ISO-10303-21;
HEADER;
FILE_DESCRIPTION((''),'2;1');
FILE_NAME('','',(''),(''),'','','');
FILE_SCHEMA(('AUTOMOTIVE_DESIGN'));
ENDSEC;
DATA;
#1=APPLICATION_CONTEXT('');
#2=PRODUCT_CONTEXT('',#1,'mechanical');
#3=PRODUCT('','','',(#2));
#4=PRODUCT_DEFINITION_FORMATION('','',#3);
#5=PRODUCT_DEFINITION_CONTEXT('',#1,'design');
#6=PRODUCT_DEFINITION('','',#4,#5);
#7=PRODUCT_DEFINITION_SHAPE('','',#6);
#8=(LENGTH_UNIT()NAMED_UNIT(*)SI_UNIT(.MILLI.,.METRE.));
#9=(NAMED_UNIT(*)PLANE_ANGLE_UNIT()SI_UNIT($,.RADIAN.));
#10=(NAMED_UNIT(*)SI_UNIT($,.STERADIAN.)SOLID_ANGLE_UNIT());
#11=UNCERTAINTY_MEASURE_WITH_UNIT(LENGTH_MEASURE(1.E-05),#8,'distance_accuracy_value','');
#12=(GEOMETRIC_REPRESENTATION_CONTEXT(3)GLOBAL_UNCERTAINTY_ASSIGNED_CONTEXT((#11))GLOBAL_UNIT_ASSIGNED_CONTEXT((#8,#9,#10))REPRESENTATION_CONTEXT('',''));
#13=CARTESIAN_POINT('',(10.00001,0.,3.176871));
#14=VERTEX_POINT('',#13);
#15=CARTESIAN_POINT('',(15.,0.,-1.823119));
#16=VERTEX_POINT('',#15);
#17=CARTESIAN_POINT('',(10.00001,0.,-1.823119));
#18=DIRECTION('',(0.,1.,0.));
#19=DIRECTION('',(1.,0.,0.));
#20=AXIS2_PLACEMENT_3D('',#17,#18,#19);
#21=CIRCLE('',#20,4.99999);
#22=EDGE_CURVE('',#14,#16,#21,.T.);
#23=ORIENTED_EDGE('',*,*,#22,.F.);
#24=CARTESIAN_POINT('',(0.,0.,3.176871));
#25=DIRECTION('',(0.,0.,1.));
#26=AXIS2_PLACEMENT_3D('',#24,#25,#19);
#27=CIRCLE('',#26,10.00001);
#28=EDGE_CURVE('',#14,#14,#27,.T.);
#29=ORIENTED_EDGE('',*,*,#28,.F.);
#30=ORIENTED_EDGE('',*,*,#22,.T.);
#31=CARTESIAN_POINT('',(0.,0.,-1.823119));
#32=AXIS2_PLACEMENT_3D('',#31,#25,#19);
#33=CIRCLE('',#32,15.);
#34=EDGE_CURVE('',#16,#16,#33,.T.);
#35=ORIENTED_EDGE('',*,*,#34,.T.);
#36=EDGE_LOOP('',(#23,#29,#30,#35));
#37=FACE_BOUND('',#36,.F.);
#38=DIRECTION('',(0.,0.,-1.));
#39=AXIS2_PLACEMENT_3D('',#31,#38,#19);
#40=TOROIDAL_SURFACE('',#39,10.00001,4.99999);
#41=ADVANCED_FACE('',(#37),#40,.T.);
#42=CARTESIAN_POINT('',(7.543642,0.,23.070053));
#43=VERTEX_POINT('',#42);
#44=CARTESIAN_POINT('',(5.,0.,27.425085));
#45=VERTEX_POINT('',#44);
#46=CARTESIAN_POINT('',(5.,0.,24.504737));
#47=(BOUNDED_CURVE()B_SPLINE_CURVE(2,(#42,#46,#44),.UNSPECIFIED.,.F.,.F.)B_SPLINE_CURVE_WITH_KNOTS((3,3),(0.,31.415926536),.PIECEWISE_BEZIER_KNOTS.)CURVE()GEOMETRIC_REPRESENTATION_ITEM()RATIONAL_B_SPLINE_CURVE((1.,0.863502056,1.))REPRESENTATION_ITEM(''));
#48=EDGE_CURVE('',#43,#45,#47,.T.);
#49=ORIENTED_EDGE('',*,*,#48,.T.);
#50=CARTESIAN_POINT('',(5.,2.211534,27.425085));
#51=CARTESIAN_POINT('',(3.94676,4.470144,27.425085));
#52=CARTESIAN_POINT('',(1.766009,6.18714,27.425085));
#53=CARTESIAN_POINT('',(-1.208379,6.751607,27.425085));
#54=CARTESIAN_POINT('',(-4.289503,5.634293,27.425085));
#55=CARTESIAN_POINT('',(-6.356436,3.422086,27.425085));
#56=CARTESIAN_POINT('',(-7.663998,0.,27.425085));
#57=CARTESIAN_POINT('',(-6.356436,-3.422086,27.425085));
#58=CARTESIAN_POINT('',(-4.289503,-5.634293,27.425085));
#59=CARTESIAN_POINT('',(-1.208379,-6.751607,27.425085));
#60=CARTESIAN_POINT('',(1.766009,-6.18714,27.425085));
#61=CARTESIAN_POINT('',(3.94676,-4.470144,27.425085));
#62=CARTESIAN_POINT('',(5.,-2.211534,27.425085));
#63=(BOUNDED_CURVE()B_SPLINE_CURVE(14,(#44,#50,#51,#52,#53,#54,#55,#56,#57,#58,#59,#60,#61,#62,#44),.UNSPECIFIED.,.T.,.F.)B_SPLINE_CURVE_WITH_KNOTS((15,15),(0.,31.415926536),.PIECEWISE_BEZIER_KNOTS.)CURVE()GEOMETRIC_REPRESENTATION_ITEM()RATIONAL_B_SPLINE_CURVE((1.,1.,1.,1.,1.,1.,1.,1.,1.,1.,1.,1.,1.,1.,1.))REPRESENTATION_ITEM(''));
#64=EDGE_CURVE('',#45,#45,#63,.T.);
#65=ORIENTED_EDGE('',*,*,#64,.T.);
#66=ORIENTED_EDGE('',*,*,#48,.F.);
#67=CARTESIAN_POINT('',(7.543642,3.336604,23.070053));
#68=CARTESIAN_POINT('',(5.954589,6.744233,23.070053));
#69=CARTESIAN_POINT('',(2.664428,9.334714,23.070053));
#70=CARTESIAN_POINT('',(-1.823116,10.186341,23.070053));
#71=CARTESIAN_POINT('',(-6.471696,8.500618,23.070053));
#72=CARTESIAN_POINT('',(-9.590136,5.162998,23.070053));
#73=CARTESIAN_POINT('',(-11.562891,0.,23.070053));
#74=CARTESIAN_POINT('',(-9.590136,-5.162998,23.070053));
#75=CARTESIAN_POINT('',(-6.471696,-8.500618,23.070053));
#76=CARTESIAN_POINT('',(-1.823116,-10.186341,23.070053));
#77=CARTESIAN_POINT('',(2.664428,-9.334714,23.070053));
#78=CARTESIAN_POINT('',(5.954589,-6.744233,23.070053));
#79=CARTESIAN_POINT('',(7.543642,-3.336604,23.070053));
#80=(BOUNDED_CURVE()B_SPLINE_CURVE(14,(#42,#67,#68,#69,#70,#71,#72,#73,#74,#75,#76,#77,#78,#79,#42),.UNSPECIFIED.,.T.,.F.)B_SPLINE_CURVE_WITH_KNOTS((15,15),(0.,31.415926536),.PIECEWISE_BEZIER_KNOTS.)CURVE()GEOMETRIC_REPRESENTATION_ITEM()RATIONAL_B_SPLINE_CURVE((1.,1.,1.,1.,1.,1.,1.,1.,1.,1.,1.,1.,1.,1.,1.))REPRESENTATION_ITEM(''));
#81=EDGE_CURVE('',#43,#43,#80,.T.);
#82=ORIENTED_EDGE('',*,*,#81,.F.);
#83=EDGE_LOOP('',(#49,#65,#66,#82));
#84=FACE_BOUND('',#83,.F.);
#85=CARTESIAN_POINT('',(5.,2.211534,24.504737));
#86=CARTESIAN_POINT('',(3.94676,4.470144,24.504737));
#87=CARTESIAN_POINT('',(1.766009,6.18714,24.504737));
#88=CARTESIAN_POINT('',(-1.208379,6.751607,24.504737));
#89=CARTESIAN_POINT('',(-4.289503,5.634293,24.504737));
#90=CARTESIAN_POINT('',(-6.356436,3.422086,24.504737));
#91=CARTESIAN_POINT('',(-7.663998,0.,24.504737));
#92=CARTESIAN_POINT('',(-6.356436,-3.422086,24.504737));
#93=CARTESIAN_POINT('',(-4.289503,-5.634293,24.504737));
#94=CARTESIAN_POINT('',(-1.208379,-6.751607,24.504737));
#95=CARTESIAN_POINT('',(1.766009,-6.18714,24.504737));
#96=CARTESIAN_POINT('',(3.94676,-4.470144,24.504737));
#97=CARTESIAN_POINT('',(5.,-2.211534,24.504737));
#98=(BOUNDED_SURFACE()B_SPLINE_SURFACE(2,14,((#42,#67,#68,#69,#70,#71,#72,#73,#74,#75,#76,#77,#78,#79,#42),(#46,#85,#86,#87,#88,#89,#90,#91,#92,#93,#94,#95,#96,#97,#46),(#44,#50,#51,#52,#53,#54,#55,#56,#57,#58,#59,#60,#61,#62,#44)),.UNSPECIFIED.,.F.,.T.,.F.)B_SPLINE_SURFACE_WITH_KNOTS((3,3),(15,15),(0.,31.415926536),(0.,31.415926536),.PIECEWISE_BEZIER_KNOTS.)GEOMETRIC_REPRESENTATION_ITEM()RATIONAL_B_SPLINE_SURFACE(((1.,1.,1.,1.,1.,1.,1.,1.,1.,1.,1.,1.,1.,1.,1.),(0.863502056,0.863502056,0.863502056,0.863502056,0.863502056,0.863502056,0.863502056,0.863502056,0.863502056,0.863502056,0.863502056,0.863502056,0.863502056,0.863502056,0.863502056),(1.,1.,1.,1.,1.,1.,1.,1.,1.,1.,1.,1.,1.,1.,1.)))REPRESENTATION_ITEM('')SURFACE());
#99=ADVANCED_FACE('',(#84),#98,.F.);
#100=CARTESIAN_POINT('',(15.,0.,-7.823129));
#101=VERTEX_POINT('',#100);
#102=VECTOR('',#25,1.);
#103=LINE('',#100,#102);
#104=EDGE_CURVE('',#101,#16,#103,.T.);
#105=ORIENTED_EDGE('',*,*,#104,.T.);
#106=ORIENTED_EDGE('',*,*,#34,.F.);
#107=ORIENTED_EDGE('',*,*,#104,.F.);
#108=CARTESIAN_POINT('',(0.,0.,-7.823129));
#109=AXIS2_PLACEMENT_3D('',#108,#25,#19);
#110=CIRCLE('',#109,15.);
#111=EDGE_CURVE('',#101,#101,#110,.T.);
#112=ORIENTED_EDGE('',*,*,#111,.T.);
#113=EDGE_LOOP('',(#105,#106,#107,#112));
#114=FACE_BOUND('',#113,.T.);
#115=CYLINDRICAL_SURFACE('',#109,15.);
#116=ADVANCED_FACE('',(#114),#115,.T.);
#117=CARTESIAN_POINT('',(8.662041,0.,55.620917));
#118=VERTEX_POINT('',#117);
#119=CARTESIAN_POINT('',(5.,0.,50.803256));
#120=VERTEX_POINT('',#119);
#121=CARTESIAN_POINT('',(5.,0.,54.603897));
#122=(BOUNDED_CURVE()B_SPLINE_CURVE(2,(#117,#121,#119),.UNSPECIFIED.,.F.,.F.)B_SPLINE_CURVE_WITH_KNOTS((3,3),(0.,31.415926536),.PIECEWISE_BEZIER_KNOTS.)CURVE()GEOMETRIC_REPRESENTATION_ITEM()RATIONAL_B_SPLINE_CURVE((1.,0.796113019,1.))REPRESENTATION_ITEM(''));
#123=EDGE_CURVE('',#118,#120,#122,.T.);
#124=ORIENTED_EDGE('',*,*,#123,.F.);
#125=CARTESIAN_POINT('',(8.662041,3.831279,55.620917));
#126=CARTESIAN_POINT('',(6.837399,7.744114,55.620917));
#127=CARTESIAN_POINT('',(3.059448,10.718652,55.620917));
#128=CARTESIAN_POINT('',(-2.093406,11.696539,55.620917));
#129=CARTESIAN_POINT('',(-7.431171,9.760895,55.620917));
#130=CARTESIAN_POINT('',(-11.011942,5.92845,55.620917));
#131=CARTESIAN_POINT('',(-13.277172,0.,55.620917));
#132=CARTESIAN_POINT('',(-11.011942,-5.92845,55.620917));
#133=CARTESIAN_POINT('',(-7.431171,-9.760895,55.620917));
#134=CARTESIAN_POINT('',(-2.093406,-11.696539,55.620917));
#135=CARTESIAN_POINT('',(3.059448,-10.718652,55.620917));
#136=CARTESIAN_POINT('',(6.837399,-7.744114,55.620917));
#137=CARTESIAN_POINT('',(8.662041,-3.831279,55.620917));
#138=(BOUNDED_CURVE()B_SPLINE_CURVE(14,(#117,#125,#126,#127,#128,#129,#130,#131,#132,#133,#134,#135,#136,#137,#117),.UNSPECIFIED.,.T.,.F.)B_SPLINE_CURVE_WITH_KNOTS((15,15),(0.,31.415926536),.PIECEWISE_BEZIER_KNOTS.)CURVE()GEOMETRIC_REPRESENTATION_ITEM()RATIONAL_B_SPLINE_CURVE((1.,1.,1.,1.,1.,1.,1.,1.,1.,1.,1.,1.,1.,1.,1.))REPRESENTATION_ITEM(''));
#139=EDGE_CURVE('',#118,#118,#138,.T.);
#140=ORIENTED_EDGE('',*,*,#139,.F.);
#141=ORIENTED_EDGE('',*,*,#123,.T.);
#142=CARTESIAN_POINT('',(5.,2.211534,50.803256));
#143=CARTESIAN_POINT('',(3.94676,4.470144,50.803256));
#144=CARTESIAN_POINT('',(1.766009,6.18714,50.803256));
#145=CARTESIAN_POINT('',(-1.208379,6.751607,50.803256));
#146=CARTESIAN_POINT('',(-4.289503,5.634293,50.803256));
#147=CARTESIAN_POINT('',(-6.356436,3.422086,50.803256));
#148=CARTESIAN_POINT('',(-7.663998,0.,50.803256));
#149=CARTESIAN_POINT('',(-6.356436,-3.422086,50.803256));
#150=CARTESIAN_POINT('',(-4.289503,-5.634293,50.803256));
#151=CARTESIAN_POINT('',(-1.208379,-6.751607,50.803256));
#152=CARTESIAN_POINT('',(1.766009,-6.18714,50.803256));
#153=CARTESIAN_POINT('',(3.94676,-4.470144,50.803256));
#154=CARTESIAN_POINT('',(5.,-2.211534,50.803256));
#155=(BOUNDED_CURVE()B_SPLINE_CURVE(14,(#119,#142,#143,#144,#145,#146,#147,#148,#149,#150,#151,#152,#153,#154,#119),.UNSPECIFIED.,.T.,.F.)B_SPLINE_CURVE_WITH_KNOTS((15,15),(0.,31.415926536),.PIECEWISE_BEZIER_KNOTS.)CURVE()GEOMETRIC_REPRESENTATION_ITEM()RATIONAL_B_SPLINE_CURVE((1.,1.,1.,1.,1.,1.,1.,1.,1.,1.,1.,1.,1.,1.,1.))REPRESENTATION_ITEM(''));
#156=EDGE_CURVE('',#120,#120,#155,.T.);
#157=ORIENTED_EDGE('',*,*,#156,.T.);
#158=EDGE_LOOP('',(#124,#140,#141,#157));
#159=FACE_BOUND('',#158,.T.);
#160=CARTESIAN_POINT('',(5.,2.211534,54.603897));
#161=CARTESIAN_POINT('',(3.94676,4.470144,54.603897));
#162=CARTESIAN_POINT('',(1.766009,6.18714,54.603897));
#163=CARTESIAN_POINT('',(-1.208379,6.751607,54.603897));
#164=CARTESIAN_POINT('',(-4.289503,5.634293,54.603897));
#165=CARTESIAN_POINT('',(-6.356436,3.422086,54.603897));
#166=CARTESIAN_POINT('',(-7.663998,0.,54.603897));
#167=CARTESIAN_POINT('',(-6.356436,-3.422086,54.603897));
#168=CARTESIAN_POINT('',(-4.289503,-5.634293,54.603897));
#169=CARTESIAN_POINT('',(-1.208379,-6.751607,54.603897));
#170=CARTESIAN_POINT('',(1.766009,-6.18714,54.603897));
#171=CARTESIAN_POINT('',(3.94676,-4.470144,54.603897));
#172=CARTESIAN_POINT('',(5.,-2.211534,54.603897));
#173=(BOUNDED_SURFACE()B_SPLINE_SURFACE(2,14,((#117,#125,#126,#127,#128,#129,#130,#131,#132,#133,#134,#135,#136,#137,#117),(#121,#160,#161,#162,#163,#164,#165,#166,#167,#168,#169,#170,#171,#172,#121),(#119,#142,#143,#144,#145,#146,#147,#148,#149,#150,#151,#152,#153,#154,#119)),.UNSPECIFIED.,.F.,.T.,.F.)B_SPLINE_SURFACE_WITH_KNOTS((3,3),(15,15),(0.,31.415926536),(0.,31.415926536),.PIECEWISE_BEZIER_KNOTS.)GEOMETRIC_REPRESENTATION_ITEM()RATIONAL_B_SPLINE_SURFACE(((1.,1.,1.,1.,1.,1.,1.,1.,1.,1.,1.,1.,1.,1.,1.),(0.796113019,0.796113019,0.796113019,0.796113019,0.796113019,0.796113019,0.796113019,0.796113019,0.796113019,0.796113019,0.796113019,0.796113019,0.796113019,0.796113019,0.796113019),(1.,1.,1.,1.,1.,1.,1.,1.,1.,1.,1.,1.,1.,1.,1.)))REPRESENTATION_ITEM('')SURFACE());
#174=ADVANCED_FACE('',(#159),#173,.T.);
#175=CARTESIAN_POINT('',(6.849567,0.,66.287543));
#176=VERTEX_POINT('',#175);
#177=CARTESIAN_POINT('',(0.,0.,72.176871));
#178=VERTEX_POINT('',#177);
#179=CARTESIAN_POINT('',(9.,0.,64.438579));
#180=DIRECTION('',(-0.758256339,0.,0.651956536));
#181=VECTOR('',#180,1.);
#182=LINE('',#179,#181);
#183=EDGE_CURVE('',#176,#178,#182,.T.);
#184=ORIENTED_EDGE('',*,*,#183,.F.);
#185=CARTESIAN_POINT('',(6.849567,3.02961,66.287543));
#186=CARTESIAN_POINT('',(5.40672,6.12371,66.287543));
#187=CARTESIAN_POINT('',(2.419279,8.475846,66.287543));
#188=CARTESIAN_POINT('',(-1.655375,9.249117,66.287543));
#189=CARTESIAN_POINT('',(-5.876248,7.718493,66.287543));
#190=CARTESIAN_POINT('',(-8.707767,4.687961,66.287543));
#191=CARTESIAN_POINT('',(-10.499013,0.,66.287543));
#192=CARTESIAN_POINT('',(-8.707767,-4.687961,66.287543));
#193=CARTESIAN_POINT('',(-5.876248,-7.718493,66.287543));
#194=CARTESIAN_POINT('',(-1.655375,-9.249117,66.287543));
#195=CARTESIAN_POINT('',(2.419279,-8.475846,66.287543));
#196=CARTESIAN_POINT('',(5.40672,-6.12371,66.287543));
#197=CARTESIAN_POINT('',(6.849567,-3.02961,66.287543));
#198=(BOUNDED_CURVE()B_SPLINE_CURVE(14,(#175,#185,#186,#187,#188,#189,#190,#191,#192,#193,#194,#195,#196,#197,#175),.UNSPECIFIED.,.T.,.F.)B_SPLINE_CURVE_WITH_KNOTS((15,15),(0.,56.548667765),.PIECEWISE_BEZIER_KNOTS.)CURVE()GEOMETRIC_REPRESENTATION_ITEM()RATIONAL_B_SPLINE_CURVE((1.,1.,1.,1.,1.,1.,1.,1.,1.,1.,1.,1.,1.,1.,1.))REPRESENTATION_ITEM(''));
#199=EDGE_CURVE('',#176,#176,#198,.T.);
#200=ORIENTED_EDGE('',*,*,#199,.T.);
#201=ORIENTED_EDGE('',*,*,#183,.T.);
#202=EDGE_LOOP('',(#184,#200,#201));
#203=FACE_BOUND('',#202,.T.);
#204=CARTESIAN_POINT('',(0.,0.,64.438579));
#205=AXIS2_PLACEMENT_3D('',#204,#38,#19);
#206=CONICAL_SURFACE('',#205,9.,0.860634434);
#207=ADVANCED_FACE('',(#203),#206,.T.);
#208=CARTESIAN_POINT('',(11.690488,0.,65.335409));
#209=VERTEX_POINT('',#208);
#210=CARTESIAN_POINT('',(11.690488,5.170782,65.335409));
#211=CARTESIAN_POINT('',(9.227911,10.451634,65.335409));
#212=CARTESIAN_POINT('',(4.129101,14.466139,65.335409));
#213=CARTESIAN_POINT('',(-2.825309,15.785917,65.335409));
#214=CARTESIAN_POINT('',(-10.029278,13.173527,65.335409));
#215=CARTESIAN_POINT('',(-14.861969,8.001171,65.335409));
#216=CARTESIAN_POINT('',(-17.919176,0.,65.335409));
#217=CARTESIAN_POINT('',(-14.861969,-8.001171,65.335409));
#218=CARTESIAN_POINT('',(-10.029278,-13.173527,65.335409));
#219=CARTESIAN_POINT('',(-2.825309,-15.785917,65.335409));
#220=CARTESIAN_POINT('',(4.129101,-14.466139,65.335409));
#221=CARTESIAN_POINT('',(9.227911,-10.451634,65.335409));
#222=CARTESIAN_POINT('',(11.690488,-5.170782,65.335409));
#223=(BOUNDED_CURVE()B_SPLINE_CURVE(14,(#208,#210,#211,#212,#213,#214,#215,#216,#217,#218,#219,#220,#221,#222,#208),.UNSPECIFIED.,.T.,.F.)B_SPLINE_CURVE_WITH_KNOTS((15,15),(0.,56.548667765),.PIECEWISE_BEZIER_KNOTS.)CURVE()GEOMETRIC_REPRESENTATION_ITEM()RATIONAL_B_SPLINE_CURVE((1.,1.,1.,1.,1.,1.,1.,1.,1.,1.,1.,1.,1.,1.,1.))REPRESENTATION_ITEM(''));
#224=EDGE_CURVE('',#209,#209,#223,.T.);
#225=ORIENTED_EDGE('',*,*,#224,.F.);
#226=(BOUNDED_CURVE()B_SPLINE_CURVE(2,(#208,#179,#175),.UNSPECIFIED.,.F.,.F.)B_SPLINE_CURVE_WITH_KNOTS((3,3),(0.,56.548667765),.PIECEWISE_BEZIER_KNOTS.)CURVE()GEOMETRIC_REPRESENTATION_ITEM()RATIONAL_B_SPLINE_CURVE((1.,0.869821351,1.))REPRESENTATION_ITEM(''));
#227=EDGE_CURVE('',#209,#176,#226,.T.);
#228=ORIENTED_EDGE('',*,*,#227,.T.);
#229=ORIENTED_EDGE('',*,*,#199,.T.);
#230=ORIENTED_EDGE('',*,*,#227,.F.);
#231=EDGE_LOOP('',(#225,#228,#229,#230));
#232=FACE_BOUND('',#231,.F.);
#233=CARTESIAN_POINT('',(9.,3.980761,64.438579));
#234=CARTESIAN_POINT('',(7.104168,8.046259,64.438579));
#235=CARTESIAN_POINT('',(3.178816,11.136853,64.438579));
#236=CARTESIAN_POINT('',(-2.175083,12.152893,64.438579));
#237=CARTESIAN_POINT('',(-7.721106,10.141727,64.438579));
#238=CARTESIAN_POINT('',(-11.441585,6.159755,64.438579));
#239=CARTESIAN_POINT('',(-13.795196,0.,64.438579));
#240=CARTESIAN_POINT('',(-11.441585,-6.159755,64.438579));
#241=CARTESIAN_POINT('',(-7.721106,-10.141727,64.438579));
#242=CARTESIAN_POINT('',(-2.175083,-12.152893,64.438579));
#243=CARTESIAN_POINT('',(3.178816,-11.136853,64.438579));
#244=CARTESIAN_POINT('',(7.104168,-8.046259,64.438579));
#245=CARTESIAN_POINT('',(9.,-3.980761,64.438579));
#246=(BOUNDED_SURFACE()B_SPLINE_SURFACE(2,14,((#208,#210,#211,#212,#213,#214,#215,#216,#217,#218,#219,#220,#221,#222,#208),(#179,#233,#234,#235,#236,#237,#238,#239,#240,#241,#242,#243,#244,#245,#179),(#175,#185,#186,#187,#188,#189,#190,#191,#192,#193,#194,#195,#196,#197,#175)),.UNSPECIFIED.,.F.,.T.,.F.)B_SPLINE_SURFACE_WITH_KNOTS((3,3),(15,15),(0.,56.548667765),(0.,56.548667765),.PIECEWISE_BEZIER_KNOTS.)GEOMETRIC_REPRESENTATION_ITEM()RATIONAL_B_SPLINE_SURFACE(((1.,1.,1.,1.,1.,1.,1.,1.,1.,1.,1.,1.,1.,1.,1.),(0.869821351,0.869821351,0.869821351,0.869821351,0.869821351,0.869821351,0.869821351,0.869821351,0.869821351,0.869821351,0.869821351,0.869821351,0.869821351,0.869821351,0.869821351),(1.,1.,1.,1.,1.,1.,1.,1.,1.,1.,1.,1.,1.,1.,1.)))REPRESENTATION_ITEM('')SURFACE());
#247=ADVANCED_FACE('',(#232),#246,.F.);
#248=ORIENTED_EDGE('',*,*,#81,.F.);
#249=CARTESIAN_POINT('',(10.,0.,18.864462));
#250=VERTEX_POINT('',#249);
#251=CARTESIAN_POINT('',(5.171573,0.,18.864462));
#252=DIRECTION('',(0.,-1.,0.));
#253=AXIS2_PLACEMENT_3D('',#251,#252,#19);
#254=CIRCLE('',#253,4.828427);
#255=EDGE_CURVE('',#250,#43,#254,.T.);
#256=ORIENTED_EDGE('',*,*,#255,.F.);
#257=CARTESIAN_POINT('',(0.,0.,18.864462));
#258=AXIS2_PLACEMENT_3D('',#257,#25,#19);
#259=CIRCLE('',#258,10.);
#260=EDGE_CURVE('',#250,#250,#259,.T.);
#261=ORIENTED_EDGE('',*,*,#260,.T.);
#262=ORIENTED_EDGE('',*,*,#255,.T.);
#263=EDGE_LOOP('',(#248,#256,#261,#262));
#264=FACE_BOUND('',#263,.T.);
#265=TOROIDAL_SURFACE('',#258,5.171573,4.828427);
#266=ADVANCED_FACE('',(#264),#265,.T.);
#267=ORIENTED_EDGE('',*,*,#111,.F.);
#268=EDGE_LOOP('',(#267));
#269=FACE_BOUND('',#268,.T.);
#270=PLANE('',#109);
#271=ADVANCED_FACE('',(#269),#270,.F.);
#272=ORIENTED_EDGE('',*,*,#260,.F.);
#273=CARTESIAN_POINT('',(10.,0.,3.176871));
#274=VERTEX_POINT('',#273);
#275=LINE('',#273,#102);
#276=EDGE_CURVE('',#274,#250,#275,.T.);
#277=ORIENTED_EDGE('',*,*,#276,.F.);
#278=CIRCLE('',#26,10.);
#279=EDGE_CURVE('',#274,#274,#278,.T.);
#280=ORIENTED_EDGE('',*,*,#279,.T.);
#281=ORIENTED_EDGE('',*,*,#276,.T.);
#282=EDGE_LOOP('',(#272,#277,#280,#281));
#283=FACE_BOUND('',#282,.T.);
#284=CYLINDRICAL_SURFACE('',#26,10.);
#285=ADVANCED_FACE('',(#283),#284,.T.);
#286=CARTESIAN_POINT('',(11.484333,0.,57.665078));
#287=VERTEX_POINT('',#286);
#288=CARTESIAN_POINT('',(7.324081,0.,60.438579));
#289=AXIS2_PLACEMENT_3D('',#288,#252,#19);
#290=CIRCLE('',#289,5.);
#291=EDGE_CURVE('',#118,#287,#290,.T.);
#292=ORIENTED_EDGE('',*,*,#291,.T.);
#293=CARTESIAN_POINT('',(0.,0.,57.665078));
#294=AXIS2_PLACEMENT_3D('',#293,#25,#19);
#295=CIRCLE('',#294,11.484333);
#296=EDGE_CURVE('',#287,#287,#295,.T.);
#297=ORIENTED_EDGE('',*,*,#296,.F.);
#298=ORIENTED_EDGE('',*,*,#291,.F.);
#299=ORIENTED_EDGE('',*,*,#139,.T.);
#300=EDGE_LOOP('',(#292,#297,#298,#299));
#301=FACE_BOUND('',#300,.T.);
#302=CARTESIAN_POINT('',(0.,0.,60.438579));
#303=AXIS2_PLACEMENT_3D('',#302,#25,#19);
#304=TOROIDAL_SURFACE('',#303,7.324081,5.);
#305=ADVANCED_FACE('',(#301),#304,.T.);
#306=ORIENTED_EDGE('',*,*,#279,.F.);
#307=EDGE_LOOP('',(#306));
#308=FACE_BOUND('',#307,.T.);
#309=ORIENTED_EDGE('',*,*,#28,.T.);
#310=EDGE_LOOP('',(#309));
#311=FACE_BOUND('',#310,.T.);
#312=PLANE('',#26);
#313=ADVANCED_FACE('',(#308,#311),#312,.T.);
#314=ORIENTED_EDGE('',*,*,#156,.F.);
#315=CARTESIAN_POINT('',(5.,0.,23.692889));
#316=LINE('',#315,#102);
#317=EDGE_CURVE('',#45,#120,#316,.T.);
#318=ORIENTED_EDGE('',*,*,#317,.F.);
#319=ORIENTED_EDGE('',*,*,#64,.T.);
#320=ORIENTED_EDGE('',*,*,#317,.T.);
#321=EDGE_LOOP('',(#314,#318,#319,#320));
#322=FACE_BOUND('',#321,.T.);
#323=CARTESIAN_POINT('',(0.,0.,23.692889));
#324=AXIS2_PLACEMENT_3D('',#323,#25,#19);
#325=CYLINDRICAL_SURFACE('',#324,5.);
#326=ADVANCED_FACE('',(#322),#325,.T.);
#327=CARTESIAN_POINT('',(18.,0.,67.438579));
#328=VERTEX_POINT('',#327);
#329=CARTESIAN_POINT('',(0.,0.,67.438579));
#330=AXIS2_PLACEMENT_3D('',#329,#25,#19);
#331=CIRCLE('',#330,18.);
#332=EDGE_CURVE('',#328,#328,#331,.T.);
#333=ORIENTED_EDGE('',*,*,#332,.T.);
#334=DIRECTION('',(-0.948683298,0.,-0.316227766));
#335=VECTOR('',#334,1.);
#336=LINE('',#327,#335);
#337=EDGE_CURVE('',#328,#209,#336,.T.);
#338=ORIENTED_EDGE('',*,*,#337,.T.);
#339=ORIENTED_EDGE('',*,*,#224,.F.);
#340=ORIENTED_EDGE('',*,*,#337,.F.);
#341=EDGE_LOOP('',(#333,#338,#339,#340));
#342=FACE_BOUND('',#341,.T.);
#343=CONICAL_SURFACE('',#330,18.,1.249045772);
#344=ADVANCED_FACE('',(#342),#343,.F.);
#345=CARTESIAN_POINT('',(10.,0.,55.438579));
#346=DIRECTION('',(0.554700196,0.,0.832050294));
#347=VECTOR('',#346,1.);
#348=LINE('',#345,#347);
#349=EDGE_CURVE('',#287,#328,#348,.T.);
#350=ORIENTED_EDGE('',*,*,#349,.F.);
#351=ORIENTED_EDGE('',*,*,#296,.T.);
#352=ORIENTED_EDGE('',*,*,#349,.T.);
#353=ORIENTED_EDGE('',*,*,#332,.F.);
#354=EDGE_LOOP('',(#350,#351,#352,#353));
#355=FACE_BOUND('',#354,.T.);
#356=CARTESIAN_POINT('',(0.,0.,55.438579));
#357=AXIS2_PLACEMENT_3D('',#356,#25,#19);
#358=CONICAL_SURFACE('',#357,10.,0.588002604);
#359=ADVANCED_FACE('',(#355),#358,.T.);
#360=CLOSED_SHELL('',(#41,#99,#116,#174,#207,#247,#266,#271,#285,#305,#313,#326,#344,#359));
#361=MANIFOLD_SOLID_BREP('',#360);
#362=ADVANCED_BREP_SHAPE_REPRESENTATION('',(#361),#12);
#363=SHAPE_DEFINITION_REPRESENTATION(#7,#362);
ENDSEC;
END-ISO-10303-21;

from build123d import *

# Parameters (mm, degrees)
F2_R = 4.8284271247
F3_R = 4.99999
F4_R = 5
F5_R = 5
F6_R = 5
F7_R = 5


# Not quite as in the source:
# - a fillet or chamfer is up to 0.001 mm smaller than in the source, because OpenCascade refuses the exact size


with BuildPart() as f1:
    # F0 (on Front) → F1 (revolve)
    with BuildSketch(Plane.XZ):
        Polygon((0, 55.4385791123), (0, -7.8231290636), (15, -7.8231290636), (15, 3.1768709364), (10, 3.1768709364), (10, 23.6928891391), (5, 23.6928891391), (5, 55.4385791123), (10, 55.4385791123), (18, 67.4385791123), (9, 64.4385791123), (0, 72.1768709364), (0, 61.4385791123), align=None)
    revolve(axis=Axis((0, 0, 26.8077250243), (0, 0, 1)))

    # F2
    f2_edges = [f1.edges().sort_by_distance(p)[0] for p in [
        (-10, 0, 23.692889),
    ]]
    fillet(f2_edges, radius=F2_R)

    # F3 (radius 5 in the source; OpenCascade refuses exactly that, so slightly less here)
    f3_edges = [f1.edges().sort_by_distance(p)[0] for p in [
        (-15, 0, 3.176871),
    ]]
    fillet(f3_edges, radius=F3_R)

    # F4
    f4_edges = [f1.edges().sort_by_distance(p)[0] for p in [
        (-5, 0, 23.692889),
    ]]
    fillet(f4_edges, radius=F4_R)

    # F5
    f5_edges = [f1.edges().sort_by_distance(p)[0] for p in [
        (-10, 0, 55.438579),
    ]]
    fillet(f5_edges, radius=F5_R)

    # F6
    f6_edges = [f1.edges().sort_by_distance(p)[0] for p in [
        (-9, 0, 64.438579),
    ]]
    fillet(f6_edges, radius=F6_R)

    # F7
    f7_edges = [f1.edges().sort_by_distance(p)[0] for p in [
        (-5, 0, 55.438579),
    ]]
    fillet(f7_edges, radius=F7_R)


solid = f1.part
